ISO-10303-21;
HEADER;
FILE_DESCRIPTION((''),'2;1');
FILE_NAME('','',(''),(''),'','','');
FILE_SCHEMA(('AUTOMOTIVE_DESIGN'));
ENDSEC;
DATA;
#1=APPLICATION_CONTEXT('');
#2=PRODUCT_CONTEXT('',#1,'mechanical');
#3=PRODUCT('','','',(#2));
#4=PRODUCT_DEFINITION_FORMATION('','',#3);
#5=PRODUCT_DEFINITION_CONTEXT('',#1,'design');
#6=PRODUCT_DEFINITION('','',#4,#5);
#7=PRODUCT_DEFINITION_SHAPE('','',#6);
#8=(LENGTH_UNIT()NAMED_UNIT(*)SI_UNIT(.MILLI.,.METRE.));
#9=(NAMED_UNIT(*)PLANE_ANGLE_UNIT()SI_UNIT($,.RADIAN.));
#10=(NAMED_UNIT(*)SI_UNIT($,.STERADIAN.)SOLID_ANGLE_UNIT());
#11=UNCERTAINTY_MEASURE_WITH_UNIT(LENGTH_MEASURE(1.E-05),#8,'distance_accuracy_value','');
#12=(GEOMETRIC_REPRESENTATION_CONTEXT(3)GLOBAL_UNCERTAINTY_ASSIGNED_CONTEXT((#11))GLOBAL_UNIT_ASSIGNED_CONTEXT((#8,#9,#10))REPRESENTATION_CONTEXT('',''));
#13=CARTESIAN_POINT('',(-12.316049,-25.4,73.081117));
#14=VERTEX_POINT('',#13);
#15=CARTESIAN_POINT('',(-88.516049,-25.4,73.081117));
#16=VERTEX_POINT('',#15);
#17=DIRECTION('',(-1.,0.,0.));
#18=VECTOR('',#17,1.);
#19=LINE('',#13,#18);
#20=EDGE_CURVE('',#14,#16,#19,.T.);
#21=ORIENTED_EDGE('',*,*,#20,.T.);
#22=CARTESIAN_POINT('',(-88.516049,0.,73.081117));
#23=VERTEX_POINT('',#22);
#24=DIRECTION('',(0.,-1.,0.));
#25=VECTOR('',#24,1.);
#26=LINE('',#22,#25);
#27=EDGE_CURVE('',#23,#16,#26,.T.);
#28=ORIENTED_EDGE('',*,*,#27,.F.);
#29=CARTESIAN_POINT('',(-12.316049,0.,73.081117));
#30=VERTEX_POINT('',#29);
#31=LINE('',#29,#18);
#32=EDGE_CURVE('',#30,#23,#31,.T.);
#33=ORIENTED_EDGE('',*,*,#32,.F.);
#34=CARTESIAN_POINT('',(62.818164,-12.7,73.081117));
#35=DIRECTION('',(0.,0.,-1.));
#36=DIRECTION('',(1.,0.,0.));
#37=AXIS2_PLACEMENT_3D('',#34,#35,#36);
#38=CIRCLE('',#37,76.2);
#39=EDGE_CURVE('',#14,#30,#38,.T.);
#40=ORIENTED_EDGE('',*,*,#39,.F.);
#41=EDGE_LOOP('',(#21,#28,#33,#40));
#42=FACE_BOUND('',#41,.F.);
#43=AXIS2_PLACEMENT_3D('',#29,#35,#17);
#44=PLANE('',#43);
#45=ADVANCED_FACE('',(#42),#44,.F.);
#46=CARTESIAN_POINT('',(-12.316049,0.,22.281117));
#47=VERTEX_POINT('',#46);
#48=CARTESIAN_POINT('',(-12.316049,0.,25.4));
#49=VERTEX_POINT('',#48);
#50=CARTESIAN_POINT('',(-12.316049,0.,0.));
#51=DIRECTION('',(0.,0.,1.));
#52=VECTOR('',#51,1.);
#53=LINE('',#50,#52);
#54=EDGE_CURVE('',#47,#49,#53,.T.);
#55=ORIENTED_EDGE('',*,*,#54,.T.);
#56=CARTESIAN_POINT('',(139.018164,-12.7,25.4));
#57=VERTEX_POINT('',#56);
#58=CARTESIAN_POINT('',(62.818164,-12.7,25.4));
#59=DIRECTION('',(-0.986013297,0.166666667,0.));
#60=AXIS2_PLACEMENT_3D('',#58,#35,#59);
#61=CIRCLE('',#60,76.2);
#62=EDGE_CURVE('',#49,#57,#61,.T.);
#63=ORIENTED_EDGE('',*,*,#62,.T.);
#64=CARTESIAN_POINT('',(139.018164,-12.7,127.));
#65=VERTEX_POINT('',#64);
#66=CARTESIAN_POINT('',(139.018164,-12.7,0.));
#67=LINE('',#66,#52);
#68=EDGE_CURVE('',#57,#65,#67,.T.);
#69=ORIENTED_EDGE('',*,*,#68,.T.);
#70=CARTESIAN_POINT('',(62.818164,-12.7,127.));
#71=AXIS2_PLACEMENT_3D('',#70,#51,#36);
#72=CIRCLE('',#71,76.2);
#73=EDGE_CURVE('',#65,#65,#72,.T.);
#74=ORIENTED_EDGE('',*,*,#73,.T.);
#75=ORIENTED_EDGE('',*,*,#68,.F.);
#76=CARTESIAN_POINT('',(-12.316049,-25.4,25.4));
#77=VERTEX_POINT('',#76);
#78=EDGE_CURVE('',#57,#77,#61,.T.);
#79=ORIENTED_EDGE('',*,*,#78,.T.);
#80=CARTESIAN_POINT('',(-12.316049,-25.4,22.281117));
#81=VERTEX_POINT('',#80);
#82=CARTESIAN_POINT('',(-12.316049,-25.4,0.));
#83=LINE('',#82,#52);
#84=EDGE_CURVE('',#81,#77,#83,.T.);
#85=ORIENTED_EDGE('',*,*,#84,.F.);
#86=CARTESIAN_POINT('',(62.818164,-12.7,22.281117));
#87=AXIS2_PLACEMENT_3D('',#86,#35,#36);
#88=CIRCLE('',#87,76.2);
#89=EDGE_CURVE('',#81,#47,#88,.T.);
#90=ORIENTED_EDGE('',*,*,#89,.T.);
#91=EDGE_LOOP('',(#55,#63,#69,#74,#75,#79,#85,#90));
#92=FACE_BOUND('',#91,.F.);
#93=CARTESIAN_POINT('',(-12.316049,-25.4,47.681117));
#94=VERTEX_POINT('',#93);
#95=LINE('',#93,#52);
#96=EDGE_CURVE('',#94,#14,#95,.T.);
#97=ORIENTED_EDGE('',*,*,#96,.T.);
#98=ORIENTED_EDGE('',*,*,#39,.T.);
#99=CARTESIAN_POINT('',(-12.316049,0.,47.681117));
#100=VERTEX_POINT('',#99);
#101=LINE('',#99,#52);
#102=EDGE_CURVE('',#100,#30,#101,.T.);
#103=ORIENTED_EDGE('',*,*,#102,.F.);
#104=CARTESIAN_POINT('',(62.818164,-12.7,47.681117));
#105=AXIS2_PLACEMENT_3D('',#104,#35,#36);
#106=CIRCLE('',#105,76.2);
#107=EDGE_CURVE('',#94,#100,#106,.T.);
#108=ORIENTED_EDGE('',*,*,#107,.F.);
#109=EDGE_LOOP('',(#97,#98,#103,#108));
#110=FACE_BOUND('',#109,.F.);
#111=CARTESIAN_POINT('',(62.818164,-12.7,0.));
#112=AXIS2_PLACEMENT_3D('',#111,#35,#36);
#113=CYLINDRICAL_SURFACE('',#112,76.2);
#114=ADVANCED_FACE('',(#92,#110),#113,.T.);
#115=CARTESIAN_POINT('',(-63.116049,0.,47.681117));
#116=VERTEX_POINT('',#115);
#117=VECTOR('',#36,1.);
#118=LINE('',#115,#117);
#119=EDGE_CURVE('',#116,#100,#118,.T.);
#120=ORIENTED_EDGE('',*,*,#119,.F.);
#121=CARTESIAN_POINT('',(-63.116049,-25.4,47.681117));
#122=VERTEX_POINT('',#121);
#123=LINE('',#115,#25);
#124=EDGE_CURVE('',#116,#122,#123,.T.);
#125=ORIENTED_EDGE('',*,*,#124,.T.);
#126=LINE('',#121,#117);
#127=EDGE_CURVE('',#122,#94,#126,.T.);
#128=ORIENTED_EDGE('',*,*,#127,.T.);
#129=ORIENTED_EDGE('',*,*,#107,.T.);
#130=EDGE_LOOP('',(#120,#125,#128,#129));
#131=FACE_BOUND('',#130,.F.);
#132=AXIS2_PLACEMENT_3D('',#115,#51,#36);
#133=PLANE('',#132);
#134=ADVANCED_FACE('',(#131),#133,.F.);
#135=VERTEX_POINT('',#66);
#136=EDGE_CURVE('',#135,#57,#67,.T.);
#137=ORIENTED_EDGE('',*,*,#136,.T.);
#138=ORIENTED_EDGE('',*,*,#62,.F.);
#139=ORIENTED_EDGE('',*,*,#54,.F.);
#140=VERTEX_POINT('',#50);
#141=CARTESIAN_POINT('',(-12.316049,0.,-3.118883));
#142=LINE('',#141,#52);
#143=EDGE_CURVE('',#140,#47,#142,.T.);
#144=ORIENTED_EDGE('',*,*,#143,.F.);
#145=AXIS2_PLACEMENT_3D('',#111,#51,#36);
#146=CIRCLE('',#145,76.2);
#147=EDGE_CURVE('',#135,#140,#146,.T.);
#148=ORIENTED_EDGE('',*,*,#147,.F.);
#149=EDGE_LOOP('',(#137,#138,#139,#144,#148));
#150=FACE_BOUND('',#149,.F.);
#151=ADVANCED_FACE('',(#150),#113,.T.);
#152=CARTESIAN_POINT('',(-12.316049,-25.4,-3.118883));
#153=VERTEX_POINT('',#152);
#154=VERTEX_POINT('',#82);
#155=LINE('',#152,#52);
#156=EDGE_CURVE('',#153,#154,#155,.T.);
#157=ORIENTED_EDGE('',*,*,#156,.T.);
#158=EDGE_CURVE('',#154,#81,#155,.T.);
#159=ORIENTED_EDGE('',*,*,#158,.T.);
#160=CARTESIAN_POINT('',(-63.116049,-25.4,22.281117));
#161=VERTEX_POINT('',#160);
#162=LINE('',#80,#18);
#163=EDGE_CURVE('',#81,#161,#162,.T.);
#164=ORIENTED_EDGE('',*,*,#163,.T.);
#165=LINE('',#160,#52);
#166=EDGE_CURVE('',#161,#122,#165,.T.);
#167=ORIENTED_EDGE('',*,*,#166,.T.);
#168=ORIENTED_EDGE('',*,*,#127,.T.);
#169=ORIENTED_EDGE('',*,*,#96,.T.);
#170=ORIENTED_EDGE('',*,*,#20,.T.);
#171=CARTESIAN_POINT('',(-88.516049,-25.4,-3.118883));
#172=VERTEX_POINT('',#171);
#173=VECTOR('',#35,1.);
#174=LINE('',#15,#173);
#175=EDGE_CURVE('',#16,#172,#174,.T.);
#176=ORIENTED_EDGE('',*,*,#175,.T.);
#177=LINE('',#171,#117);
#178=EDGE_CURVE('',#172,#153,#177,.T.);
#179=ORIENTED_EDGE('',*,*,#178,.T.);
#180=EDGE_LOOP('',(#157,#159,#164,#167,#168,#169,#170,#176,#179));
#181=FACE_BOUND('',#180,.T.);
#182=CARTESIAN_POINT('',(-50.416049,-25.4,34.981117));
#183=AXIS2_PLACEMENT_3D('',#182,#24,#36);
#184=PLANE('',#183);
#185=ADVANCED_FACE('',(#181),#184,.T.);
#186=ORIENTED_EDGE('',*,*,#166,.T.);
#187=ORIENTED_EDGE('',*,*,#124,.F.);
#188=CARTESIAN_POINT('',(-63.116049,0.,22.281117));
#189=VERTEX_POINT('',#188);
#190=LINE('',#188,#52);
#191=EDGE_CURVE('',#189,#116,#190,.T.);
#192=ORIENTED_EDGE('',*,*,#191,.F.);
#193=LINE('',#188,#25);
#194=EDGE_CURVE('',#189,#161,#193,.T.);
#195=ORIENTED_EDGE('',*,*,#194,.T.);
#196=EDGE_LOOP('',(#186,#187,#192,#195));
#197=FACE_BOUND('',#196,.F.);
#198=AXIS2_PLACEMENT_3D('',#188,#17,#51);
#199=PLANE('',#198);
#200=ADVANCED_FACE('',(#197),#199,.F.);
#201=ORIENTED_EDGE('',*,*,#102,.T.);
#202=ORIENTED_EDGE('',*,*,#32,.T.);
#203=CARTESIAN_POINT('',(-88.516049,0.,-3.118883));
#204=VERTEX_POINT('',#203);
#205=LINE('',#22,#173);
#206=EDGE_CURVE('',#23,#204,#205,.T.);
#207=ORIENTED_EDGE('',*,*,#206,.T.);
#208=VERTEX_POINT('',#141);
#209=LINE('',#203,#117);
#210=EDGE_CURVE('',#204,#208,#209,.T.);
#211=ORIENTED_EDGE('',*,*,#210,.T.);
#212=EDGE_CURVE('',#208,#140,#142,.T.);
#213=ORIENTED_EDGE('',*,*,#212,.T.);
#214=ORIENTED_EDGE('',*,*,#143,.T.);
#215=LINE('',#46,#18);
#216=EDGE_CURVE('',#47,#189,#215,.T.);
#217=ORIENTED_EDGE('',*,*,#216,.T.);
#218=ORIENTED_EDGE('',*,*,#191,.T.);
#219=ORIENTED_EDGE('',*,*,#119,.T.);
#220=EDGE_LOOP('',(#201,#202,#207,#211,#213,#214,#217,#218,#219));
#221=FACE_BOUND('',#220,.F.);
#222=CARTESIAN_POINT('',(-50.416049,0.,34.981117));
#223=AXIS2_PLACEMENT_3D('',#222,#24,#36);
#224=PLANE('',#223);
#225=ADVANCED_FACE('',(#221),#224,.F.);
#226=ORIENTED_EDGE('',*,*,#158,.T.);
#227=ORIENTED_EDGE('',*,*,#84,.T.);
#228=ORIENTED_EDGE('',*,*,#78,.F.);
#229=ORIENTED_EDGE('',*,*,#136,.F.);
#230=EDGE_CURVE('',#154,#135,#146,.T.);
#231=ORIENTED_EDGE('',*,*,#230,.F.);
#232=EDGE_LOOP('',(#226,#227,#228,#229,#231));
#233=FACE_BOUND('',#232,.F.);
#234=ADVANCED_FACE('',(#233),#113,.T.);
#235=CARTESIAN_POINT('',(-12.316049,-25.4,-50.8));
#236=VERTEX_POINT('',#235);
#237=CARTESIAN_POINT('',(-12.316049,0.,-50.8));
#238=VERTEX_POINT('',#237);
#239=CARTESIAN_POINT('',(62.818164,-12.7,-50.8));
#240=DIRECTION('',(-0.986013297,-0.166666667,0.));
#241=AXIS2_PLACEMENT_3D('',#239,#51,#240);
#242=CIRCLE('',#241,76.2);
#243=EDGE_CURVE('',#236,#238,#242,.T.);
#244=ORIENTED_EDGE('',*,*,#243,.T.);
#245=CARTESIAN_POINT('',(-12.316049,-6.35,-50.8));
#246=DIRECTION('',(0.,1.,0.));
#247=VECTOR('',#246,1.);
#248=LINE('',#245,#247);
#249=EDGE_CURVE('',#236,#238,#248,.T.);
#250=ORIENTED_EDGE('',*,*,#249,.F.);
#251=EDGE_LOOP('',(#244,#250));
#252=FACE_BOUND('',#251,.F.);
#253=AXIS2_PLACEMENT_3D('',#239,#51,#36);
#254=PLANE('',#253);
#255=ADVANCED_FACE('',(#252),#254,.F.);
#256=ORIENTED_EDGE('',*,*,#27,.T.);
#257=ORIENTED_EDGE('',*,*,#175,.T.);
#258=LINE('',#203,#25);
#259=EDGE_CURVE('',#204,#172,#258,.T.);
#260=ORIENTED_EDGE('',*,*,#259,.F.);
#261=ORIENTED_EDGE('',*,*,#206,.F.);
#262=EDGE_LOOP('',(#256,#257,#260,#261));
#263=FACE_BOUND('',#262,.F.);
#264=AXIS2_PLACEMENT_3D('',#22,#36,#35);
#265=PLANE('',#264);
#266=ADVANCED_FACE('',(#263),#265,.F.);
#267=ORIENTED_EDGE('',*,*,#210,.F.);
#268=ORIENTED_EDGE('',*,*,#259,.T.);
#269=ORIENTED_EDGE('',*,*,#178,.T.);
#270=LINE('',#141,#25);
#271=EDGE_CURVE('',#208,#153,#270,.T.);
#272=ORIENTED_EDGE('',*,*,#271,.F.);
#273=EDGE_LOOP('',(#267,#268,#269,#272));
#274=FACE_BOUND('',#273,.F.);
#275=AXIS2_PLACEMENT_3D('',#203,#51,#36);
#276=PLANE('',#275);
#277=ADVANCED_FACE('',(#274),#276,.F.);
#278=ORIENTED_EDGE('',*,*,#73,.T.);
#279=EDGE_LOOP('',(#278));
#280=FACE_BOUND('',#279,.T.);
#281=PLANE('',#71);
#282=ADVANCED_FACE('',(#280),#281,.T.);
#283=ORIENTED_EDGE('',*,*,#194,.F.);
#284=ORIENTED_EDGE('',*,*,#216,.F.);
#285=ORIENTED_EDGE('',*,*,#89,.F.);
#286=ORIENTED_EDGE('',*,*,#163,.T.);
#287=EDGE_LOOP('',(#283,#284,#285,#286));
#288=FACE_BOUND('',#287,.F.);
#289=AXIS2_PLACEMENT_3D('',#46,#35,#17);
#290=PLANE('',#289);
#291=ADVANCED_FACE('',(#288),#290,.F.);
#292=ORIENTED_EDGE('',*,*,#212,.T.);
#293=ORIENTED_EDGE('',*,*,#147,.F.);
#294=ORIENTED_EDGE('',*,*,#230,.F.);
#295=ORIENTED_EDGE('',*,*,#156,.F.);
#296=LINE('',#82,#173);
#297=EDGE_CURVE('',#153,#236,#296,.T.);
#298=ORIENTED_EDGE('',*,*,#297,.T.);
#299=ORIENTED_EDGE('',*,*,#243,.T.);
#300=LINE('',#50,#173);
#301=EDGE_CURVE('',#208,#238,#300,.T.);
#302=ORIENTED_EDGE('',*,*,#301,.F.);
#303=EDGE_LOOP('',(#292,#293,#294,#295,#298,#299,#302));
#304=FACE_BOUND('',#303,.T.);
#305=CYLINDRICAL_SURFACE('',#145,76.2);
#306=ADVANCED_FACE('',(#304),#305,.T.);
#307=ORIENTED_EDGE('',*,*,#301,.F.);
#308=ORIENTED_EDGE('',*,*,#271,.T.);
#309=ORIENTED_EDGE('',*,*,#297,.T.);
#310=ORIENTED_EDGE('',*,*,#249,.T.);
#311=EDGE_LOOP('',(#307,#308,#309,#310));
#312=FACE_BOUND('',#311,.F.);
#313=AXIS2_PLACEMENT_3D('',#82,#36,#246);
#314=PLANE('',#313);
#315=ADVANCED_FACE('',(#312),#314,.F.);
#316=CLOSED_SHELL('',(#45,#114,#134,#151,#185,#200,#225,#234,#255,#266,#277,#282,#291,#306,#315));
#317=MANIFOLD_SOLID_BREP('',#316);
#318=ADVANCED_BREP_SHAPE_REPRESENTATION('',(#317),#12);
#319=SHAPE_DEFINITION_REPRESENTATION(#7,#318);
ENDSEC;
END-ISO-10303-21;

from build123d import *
from build123d import SkipClean  # not in build123d's __all__

# Parameters (mm, degrees)
F1_DEPTH      = 25.4
F2_R          = 76.2
F3_DEPTH      = 127
F4_DEPTH      = 50.8
F4_DEPTH_BACK = 25.4


with BuildPart() as f1:
    # F0 (on Front) → F1 (new body)
    with BuildSketch(Plane.XZ):
        Polygon((-12.3160492671, 73.0811166525), (-88.5160492671, 73.0811166525), (-88.5160492671, -3.1188833475), (-12.3160492671, -3.1188833475), (-12.3160492671, 22.2811166525), (-63.1160492671, 22.2811166525), (-63.1160492671, 47.6811166525), (-12.3160492671, 47.6811166525), align=None)
    extrude(amount=F1_DEPTH)

    # F2 (on Top) → F3 (join)
    with BuildSketch(Plane.XY):
        with Locations((62.8181639783, -12.7)):
            Circle(F2_R)
    extrude(amount=F3_DEPTH)

    # F4 (add, two sides): a face of the model
    f4_faces = [f1.faces().sort_by_distance(p)[0] for p in [
        (62.8930999906, -12.7, 0),
    ]]
    with SkipClean():  # cleaning this boolean's faces spoils the solid; the shape is the same uncleaned
        extrude(f4_faces, amount=F4_DEPTH)
        extrude(f4_faces, amount=-F4_DEPTH_BACK)


solid = f1.part
